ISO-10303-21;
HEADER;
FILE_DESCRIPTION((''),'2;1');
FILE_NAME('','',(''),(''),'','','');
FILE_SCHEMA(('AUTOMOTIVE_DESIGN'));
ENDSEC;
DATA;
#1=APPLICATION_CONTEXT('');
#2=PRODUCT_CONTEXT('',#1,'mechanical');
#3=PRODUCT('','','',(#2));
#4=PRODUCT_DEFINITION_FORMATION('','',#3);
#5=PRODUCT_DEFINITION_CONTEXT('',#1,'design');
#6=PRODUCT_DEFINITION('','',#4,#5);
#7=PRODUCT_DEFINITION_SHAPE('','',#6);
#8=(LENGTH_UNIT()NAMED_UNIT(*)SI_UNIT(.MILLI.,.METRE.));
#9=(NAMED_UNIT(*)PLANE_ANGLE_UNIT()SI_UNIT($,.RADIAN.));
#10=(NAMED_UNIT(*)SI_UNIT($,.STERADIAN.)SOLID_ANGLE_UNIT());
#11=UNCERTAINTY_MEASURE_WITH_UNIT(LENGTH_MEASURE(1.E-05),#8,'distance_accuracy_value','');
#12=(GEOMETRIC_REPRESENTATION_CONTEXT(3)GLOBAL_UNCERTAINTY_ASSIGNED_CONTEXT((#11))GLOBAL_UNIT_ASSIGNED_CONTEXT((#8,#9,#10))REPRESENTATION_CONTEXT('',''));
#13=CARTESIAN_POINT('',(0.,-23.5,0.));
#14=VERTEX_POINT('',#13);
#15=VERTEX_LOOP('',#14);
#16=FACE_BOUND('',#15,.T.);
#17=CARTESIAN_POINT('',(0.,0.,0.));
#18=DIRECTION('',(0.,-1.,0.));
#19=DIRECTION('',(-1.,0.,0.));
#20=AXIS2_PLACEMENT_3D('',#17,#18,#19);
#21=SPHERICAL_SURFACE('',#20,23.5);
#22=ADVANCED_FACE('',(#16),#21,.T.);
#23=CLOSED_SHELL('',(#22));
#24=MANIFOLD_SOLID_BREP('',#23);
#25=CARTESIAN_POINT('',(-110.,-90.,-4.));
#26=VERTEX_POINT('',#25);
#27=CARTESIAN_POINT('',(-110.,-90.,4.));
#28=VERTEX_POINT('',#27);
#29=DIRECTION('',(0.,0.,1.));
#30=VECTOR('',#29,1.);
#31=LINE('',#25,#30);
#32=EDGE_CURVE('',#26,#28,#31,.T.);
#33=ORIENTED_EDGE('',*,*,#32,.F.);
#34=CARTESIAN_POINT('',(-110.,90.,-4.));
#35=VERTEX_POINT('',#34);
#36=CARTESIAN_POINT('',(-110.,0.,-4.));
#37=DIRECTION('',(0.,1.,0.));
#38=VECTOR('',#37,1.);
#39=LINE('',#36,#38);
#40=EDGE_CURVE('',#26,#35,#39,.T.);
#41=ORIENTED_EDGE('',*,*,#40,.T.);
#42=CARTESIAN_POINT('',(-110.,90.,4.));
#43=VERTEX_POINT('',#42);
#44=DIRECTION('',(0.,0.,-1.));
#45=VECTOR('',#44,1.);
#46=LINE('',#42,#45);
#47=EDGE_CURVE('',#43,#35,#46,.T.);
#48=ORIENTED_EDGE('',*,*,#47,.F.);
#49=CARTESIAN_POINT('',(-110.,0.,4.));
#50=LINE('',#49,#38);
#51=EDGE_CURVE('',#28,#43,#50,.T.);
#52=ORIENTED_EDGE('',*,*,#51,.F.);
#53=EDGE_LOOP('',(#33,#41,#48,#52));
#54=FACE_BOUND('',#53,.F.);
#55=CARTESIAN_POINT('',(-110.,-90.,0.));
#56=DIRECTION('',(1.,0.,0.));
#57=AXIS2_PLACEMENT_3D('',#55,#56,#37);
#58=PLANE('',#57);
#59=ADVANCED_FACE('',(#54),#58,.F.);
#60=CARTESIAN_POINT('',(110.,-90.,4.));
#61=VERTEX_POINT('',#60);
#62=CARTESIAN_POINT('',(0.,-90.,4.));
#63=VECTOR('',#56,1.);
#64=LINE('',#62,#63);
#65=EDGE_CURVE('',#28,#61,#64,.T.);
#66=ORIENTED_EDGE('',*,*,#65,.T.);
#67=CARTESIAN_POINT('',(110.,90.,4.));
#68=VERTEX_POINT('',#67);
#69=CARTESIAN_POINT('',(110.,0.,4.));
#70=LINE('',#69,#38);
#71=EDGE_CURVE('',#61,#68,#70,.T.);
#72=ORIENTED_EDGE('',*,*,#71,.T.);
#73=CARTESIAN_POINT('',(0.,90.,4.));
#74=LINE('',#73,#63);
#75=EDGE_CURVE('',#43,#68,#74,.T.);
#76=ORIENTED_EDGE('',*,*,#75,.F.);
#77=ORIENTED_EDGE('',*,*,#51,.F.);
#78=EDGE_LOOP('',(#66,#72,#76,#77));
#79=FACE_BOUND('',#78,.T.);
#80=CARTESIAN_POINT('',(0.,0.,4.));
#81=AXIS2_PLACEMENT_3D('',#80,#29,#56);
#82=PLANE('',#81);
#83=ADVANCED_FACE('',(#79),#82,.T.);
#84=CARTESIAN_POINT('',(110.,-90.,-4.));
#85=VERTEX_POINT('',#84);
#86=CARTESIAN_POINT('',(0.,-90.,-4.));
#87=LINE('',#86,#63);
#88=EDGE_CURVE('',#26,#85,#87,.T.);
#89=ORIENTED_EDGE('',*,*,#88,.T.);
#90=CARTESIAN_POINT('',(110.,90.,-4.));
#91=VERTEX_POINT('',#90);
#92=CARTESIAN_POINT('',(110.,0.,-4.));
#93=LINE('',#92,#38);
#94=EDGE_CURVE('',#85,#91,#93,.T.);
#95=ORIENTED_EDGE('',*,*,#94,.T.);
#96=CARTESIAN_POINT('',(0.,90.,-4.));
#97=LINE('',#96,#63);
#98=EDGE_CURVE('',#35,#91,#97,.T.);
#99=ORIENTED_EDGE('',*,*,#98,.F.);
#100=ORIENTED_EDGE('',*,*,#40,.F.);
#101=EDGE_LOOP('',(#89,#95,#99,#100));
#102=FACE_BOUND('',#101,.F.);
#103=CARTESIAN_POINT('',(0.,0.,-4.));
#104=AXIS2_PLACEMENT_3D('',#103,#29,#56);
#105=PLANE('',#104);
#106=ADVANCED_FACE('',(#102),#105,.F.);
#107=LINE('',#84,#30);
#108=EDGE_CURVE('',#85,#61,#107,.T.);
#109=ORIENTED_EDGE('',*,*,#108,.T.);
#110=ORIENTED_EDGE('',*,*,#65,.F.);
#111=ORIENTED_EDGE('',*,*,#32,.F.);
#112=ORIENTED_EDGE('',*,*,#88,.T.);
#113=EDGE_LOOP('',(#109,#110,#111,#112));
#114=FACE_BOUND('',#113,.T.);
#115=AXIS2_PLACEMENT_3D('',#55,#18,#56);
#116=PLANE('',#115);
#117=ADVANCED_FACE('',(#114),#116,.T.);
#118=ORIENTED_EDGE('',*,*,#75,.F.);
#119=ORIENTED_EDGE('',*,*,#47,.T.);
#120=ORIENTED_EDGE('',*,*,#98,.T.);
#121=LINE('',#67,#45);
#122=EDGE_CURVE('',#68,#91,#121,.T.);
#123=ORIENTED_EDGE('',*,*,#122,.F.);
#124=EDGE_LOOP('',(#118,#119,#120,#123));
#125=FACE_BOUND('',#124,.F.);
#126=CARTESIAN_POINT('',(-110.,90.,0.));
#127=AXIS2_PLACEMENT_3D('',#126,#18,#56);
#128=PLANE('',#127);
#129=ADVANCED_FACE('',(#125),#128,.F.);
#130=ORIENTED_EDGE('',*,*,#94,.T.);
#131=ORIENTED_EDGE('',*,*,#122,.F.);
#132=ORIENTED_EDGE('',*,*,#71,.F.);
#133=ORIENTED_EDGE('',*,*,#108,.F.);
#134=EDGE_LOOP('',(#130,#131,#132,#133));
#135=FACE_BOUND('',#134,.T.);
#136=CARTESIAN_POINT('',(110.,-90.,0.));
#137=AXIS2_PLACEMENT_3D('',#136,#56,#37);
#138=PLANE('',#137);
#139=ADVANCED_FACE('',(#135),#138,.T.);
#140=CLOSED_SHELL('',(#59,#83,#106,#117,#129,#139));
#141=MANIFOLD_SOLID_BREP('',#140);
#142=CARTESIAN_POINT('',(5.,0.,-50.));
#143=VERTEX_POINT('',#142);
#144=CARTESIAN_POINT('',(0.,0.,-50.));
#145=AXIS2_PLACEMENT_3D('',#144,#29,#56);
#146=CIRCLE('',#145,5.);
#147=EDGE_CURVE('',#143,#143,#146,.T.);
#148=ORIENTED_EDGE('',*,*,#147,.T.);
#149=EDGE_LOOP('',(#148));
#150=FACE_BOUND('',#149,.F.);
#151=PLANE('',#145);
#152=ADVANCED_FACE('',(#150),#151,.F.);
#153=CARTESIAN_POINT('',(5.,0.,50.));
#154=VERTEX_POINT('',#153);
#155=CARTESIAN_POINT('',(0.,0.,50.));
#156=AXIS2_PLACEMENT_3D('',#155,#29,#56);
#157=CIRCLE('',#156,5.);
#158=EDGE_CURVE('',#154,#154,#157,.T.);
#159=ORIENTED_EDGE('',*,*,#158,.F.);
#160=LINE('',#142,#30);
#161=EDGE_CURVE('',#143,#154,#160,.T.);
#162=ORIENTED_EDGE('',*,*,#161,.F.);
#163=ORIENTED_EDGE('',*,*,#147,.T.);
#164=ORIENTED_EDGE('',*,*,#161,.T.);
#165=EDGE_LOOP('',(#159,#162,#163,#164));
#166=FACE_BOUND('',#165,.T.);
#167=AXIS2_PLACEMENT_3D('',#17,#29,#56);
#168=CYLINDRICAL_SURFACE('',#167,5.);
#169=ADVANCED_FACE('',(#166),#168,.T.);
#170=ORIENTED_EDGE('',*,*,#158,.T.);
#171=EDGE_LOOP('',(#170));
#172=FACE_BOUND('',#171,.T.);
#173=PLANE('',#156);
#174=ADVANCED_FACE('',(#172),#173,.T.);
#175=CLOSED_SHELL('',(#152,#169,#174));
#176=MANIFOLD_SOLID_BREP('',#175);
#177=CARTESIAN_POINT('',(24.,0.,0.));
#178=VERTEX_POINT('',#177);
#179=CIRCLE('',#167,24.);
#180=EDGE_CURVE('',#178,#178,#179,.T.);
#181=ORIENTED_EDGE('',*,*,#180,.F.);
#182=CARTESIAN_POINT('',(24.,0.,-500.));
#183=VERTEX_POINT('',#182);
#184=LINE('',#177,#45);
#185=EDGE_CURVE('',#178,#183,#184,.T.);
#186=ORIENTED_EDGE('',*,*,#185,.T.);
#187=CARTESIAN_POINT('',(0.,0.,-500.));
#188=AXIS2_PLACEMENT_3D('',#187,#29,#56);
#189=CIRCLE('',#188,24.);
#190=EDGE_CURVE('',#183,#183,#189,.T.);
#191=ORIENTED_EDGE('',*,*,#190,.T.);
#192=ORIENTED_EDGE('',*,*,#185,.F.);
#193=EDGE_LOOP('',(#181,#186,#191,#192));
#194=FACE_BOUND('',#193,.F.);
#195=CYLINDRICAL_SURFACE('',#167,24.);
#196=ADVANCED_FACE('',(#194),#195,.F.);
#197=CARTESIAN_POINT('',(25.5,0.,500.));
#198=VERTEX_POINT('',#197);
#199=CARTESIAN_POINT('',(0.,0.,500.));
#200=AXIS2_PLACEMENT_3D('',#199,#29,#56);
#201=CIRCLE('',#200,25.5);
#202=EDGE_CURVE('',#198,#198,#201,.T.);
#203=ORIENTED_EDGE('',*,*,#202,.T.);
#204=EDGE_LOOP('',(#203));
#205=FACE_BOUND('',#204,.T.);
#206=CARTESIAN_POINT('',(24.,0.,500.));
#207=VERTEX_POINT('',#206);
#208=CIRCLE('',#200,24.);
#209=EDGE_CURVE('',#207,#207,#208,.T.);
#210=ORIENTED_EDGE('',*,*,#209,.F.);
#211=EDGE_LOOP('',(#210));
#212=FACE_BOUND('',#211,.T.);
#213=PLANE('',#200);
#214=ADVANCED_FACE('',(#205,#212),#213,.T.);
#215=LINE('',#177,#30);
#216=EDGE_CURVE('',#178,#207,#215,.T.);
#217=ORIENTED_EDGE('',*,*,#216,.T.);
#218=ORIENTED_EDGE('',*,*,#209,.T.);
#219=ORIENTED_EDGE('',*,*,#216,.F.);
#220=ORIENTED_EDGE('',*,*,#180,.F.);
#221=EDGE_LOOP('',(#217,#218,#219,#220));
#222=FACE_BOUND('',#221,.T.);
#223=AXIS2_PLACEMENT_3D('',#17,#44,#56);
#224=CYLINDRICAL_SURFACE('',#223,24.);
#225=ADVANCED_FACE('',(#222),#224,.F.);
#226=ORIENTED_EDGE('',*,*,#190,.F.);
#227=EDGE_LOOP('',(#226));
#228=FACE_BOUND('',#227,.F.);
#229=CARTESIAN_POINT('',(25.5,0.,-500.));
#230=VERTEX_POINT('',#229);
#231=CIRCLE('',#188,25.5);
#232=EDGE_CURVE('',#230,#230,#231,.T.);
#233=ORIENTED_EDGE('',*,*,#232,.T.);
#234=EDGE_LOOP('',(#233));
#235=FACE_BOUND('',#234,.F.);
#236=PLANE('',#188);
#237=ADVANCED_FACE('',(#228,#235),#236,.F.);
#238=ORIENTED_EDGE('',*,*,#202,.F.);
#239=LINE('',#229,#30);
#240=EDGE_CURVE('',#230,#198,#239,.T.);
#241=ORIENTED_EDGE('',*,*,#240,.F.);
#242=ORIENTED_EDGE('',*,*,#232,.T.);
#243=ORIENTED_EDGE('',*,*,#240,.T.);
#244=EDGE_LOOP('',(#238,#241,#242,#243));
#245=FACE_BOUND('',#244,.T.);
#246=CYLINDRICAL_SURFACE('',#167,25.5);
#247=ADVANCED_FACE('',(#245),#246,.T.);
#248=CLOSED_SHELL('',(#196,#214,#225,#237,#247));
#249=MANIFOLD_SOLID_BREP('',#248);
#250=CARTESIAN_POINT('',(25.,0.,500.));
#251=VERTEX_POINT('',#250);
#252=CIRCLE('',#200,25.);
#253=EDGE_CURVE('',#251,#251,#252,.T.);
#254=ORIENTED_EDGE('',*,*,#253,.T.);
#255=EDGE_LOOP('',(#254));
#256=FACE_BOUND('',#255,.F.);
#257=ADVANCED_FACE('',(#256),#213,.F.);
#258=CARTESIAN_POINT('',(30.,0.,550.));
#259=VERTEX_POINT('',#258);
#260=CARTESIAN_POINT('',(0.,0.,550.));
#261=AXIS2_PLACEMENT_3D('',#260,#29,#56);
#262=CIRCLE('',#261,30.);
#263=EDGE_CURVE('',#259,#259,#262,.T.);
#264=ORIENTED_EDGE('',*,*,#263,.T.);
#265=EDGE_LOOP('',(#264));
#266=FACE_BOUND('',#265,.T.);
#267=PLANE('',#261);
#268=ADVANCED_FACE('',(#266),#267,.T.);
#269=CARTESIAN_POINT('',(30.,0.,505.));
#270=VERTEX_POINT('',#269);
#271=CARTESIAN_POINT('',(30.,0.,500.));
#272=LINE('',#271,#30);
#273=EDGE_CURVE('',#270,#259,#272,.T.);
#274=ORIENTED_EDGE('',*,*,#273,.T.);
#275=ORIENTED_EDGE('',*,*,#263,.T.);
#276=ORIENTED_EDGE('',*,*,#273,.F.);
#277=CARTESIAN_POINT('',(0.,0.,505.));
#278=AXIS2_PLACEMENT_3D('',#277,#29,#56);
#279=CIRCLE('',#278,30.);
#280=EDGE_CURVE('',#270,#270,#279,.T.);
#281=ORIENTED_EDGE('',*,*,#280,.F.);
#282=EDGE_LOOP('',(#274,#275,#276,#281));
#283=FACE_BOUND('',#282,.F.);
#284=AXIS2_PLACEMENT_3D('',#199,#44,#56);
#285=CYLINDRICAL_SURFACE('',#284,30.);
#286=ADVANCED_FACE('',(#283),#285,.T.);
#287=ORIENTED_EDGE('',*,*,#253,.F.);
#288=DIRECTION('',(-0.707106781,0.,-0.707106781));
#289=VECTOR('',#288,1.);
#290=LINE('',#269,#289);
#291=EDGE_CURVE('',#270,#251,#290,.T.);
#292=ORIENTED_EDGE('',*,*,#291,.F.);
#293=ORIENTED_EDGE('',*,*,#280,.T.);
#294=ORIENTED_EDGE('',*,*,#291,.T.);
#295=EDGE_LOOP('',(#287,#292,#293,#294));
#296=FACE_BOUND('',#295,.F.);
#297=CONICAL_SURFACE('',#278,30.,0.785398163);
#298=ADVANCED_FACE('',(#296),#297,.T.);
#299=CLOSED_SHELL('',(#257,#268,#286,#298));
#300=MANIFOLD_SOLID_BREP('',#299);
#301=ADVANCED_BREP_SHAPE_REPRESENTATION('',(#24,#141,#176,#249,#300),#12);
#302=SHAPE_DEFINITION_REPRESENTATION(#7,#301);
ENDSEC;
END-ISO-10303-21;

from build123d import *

# Parameters (mm, degrees)
F0_W          = 220
F0_H          = 180
F1_DEPTH      = 4
F1_DEPTH_BACK = 4
F2_R          = 5
F3_DEPTH      = 50
F3_DEPTH_BACK = 50
F4_R          = 25.5
F4_R_2        = 24
F5_DEPTH      = 500
F5_DEPTH_BACK = 500
F6_R          = 30
F6_R_2        = 25.5
F6_R_3        = 24
F7_DEPTH      = 50
F8_SIZE       = 5


with BuildPart() as f1:
    # F0 (on Top) → F1 (new body, two sides)
    with BuildSketch(Plane.XY) as f1_sk:
        Rectangle(F0_W, F0_H)
    extrude(amount=F1_DEPTH)
    extrude(f1_sk.sketch, amount=-F1_DEPTH_BACK)


with BuildPart() as f3:
    # F2 (on Top) → F3 (new body, two sides)
    with BuildSketch(Plane.XY) as f3_sk:
        Circle(F2_R)
    extrude(amount=F3_DEPTH)
    extrude(f3_sk.sketch, amount=-F3_DEPTH_BACK)


with BuildPart() as f5:
    # F4 (on Top) → F5 (new body, two sides)
    with BuildSketch(Plane.XY) as f5_sk:
        Circle(F4_R)
        Circle(F4_R_2, mode=Mode.SUBTRACT)
    extrude(amount=F5_DEPTH)
    extrude(f5_sk.sketch, amount=-F5_DEPTH_BACK)


with BuildPart() as f7:
    # F6 (on face) → F7 (new body)
    with BuildSketch(Plane.XY.offset(500)):
        Circle(F6_R)
        Circle(F6_R_2, mode=Mode.SUBTRACT)
        Circle(F6_R_2)
        Circle(F6_R_3, mode=Mode.SUBTRACT)
        Circle(F6_R_3)
    extrude(amount=F7_DEPTH)

    # F8
    f8_edges = [f7.edges().sort_by_distance(p)[0] for p in [
        (-30, 0, 500),
    ]]
    chamfer(f8_edges, length=F8_SIZE)


with BuildPart() as f10:
    # F9 (on Top) → F10 (revolve)
    with BuildSketch(Plane.XY):
        with BuildLine():
            Line((0, 0), (0, 23.5))
            ThreePointArc((0, 23.5), (-23.5, 0), (0, -23.5))
            Line((0, -23.5), (0, 0))
        make_face()
    revolve(axis=Axis((0, 0, 0), (0, -1, 0)))


solid = Compound([f1.part, f3.part, f5.part, f7.part, f10.part])
